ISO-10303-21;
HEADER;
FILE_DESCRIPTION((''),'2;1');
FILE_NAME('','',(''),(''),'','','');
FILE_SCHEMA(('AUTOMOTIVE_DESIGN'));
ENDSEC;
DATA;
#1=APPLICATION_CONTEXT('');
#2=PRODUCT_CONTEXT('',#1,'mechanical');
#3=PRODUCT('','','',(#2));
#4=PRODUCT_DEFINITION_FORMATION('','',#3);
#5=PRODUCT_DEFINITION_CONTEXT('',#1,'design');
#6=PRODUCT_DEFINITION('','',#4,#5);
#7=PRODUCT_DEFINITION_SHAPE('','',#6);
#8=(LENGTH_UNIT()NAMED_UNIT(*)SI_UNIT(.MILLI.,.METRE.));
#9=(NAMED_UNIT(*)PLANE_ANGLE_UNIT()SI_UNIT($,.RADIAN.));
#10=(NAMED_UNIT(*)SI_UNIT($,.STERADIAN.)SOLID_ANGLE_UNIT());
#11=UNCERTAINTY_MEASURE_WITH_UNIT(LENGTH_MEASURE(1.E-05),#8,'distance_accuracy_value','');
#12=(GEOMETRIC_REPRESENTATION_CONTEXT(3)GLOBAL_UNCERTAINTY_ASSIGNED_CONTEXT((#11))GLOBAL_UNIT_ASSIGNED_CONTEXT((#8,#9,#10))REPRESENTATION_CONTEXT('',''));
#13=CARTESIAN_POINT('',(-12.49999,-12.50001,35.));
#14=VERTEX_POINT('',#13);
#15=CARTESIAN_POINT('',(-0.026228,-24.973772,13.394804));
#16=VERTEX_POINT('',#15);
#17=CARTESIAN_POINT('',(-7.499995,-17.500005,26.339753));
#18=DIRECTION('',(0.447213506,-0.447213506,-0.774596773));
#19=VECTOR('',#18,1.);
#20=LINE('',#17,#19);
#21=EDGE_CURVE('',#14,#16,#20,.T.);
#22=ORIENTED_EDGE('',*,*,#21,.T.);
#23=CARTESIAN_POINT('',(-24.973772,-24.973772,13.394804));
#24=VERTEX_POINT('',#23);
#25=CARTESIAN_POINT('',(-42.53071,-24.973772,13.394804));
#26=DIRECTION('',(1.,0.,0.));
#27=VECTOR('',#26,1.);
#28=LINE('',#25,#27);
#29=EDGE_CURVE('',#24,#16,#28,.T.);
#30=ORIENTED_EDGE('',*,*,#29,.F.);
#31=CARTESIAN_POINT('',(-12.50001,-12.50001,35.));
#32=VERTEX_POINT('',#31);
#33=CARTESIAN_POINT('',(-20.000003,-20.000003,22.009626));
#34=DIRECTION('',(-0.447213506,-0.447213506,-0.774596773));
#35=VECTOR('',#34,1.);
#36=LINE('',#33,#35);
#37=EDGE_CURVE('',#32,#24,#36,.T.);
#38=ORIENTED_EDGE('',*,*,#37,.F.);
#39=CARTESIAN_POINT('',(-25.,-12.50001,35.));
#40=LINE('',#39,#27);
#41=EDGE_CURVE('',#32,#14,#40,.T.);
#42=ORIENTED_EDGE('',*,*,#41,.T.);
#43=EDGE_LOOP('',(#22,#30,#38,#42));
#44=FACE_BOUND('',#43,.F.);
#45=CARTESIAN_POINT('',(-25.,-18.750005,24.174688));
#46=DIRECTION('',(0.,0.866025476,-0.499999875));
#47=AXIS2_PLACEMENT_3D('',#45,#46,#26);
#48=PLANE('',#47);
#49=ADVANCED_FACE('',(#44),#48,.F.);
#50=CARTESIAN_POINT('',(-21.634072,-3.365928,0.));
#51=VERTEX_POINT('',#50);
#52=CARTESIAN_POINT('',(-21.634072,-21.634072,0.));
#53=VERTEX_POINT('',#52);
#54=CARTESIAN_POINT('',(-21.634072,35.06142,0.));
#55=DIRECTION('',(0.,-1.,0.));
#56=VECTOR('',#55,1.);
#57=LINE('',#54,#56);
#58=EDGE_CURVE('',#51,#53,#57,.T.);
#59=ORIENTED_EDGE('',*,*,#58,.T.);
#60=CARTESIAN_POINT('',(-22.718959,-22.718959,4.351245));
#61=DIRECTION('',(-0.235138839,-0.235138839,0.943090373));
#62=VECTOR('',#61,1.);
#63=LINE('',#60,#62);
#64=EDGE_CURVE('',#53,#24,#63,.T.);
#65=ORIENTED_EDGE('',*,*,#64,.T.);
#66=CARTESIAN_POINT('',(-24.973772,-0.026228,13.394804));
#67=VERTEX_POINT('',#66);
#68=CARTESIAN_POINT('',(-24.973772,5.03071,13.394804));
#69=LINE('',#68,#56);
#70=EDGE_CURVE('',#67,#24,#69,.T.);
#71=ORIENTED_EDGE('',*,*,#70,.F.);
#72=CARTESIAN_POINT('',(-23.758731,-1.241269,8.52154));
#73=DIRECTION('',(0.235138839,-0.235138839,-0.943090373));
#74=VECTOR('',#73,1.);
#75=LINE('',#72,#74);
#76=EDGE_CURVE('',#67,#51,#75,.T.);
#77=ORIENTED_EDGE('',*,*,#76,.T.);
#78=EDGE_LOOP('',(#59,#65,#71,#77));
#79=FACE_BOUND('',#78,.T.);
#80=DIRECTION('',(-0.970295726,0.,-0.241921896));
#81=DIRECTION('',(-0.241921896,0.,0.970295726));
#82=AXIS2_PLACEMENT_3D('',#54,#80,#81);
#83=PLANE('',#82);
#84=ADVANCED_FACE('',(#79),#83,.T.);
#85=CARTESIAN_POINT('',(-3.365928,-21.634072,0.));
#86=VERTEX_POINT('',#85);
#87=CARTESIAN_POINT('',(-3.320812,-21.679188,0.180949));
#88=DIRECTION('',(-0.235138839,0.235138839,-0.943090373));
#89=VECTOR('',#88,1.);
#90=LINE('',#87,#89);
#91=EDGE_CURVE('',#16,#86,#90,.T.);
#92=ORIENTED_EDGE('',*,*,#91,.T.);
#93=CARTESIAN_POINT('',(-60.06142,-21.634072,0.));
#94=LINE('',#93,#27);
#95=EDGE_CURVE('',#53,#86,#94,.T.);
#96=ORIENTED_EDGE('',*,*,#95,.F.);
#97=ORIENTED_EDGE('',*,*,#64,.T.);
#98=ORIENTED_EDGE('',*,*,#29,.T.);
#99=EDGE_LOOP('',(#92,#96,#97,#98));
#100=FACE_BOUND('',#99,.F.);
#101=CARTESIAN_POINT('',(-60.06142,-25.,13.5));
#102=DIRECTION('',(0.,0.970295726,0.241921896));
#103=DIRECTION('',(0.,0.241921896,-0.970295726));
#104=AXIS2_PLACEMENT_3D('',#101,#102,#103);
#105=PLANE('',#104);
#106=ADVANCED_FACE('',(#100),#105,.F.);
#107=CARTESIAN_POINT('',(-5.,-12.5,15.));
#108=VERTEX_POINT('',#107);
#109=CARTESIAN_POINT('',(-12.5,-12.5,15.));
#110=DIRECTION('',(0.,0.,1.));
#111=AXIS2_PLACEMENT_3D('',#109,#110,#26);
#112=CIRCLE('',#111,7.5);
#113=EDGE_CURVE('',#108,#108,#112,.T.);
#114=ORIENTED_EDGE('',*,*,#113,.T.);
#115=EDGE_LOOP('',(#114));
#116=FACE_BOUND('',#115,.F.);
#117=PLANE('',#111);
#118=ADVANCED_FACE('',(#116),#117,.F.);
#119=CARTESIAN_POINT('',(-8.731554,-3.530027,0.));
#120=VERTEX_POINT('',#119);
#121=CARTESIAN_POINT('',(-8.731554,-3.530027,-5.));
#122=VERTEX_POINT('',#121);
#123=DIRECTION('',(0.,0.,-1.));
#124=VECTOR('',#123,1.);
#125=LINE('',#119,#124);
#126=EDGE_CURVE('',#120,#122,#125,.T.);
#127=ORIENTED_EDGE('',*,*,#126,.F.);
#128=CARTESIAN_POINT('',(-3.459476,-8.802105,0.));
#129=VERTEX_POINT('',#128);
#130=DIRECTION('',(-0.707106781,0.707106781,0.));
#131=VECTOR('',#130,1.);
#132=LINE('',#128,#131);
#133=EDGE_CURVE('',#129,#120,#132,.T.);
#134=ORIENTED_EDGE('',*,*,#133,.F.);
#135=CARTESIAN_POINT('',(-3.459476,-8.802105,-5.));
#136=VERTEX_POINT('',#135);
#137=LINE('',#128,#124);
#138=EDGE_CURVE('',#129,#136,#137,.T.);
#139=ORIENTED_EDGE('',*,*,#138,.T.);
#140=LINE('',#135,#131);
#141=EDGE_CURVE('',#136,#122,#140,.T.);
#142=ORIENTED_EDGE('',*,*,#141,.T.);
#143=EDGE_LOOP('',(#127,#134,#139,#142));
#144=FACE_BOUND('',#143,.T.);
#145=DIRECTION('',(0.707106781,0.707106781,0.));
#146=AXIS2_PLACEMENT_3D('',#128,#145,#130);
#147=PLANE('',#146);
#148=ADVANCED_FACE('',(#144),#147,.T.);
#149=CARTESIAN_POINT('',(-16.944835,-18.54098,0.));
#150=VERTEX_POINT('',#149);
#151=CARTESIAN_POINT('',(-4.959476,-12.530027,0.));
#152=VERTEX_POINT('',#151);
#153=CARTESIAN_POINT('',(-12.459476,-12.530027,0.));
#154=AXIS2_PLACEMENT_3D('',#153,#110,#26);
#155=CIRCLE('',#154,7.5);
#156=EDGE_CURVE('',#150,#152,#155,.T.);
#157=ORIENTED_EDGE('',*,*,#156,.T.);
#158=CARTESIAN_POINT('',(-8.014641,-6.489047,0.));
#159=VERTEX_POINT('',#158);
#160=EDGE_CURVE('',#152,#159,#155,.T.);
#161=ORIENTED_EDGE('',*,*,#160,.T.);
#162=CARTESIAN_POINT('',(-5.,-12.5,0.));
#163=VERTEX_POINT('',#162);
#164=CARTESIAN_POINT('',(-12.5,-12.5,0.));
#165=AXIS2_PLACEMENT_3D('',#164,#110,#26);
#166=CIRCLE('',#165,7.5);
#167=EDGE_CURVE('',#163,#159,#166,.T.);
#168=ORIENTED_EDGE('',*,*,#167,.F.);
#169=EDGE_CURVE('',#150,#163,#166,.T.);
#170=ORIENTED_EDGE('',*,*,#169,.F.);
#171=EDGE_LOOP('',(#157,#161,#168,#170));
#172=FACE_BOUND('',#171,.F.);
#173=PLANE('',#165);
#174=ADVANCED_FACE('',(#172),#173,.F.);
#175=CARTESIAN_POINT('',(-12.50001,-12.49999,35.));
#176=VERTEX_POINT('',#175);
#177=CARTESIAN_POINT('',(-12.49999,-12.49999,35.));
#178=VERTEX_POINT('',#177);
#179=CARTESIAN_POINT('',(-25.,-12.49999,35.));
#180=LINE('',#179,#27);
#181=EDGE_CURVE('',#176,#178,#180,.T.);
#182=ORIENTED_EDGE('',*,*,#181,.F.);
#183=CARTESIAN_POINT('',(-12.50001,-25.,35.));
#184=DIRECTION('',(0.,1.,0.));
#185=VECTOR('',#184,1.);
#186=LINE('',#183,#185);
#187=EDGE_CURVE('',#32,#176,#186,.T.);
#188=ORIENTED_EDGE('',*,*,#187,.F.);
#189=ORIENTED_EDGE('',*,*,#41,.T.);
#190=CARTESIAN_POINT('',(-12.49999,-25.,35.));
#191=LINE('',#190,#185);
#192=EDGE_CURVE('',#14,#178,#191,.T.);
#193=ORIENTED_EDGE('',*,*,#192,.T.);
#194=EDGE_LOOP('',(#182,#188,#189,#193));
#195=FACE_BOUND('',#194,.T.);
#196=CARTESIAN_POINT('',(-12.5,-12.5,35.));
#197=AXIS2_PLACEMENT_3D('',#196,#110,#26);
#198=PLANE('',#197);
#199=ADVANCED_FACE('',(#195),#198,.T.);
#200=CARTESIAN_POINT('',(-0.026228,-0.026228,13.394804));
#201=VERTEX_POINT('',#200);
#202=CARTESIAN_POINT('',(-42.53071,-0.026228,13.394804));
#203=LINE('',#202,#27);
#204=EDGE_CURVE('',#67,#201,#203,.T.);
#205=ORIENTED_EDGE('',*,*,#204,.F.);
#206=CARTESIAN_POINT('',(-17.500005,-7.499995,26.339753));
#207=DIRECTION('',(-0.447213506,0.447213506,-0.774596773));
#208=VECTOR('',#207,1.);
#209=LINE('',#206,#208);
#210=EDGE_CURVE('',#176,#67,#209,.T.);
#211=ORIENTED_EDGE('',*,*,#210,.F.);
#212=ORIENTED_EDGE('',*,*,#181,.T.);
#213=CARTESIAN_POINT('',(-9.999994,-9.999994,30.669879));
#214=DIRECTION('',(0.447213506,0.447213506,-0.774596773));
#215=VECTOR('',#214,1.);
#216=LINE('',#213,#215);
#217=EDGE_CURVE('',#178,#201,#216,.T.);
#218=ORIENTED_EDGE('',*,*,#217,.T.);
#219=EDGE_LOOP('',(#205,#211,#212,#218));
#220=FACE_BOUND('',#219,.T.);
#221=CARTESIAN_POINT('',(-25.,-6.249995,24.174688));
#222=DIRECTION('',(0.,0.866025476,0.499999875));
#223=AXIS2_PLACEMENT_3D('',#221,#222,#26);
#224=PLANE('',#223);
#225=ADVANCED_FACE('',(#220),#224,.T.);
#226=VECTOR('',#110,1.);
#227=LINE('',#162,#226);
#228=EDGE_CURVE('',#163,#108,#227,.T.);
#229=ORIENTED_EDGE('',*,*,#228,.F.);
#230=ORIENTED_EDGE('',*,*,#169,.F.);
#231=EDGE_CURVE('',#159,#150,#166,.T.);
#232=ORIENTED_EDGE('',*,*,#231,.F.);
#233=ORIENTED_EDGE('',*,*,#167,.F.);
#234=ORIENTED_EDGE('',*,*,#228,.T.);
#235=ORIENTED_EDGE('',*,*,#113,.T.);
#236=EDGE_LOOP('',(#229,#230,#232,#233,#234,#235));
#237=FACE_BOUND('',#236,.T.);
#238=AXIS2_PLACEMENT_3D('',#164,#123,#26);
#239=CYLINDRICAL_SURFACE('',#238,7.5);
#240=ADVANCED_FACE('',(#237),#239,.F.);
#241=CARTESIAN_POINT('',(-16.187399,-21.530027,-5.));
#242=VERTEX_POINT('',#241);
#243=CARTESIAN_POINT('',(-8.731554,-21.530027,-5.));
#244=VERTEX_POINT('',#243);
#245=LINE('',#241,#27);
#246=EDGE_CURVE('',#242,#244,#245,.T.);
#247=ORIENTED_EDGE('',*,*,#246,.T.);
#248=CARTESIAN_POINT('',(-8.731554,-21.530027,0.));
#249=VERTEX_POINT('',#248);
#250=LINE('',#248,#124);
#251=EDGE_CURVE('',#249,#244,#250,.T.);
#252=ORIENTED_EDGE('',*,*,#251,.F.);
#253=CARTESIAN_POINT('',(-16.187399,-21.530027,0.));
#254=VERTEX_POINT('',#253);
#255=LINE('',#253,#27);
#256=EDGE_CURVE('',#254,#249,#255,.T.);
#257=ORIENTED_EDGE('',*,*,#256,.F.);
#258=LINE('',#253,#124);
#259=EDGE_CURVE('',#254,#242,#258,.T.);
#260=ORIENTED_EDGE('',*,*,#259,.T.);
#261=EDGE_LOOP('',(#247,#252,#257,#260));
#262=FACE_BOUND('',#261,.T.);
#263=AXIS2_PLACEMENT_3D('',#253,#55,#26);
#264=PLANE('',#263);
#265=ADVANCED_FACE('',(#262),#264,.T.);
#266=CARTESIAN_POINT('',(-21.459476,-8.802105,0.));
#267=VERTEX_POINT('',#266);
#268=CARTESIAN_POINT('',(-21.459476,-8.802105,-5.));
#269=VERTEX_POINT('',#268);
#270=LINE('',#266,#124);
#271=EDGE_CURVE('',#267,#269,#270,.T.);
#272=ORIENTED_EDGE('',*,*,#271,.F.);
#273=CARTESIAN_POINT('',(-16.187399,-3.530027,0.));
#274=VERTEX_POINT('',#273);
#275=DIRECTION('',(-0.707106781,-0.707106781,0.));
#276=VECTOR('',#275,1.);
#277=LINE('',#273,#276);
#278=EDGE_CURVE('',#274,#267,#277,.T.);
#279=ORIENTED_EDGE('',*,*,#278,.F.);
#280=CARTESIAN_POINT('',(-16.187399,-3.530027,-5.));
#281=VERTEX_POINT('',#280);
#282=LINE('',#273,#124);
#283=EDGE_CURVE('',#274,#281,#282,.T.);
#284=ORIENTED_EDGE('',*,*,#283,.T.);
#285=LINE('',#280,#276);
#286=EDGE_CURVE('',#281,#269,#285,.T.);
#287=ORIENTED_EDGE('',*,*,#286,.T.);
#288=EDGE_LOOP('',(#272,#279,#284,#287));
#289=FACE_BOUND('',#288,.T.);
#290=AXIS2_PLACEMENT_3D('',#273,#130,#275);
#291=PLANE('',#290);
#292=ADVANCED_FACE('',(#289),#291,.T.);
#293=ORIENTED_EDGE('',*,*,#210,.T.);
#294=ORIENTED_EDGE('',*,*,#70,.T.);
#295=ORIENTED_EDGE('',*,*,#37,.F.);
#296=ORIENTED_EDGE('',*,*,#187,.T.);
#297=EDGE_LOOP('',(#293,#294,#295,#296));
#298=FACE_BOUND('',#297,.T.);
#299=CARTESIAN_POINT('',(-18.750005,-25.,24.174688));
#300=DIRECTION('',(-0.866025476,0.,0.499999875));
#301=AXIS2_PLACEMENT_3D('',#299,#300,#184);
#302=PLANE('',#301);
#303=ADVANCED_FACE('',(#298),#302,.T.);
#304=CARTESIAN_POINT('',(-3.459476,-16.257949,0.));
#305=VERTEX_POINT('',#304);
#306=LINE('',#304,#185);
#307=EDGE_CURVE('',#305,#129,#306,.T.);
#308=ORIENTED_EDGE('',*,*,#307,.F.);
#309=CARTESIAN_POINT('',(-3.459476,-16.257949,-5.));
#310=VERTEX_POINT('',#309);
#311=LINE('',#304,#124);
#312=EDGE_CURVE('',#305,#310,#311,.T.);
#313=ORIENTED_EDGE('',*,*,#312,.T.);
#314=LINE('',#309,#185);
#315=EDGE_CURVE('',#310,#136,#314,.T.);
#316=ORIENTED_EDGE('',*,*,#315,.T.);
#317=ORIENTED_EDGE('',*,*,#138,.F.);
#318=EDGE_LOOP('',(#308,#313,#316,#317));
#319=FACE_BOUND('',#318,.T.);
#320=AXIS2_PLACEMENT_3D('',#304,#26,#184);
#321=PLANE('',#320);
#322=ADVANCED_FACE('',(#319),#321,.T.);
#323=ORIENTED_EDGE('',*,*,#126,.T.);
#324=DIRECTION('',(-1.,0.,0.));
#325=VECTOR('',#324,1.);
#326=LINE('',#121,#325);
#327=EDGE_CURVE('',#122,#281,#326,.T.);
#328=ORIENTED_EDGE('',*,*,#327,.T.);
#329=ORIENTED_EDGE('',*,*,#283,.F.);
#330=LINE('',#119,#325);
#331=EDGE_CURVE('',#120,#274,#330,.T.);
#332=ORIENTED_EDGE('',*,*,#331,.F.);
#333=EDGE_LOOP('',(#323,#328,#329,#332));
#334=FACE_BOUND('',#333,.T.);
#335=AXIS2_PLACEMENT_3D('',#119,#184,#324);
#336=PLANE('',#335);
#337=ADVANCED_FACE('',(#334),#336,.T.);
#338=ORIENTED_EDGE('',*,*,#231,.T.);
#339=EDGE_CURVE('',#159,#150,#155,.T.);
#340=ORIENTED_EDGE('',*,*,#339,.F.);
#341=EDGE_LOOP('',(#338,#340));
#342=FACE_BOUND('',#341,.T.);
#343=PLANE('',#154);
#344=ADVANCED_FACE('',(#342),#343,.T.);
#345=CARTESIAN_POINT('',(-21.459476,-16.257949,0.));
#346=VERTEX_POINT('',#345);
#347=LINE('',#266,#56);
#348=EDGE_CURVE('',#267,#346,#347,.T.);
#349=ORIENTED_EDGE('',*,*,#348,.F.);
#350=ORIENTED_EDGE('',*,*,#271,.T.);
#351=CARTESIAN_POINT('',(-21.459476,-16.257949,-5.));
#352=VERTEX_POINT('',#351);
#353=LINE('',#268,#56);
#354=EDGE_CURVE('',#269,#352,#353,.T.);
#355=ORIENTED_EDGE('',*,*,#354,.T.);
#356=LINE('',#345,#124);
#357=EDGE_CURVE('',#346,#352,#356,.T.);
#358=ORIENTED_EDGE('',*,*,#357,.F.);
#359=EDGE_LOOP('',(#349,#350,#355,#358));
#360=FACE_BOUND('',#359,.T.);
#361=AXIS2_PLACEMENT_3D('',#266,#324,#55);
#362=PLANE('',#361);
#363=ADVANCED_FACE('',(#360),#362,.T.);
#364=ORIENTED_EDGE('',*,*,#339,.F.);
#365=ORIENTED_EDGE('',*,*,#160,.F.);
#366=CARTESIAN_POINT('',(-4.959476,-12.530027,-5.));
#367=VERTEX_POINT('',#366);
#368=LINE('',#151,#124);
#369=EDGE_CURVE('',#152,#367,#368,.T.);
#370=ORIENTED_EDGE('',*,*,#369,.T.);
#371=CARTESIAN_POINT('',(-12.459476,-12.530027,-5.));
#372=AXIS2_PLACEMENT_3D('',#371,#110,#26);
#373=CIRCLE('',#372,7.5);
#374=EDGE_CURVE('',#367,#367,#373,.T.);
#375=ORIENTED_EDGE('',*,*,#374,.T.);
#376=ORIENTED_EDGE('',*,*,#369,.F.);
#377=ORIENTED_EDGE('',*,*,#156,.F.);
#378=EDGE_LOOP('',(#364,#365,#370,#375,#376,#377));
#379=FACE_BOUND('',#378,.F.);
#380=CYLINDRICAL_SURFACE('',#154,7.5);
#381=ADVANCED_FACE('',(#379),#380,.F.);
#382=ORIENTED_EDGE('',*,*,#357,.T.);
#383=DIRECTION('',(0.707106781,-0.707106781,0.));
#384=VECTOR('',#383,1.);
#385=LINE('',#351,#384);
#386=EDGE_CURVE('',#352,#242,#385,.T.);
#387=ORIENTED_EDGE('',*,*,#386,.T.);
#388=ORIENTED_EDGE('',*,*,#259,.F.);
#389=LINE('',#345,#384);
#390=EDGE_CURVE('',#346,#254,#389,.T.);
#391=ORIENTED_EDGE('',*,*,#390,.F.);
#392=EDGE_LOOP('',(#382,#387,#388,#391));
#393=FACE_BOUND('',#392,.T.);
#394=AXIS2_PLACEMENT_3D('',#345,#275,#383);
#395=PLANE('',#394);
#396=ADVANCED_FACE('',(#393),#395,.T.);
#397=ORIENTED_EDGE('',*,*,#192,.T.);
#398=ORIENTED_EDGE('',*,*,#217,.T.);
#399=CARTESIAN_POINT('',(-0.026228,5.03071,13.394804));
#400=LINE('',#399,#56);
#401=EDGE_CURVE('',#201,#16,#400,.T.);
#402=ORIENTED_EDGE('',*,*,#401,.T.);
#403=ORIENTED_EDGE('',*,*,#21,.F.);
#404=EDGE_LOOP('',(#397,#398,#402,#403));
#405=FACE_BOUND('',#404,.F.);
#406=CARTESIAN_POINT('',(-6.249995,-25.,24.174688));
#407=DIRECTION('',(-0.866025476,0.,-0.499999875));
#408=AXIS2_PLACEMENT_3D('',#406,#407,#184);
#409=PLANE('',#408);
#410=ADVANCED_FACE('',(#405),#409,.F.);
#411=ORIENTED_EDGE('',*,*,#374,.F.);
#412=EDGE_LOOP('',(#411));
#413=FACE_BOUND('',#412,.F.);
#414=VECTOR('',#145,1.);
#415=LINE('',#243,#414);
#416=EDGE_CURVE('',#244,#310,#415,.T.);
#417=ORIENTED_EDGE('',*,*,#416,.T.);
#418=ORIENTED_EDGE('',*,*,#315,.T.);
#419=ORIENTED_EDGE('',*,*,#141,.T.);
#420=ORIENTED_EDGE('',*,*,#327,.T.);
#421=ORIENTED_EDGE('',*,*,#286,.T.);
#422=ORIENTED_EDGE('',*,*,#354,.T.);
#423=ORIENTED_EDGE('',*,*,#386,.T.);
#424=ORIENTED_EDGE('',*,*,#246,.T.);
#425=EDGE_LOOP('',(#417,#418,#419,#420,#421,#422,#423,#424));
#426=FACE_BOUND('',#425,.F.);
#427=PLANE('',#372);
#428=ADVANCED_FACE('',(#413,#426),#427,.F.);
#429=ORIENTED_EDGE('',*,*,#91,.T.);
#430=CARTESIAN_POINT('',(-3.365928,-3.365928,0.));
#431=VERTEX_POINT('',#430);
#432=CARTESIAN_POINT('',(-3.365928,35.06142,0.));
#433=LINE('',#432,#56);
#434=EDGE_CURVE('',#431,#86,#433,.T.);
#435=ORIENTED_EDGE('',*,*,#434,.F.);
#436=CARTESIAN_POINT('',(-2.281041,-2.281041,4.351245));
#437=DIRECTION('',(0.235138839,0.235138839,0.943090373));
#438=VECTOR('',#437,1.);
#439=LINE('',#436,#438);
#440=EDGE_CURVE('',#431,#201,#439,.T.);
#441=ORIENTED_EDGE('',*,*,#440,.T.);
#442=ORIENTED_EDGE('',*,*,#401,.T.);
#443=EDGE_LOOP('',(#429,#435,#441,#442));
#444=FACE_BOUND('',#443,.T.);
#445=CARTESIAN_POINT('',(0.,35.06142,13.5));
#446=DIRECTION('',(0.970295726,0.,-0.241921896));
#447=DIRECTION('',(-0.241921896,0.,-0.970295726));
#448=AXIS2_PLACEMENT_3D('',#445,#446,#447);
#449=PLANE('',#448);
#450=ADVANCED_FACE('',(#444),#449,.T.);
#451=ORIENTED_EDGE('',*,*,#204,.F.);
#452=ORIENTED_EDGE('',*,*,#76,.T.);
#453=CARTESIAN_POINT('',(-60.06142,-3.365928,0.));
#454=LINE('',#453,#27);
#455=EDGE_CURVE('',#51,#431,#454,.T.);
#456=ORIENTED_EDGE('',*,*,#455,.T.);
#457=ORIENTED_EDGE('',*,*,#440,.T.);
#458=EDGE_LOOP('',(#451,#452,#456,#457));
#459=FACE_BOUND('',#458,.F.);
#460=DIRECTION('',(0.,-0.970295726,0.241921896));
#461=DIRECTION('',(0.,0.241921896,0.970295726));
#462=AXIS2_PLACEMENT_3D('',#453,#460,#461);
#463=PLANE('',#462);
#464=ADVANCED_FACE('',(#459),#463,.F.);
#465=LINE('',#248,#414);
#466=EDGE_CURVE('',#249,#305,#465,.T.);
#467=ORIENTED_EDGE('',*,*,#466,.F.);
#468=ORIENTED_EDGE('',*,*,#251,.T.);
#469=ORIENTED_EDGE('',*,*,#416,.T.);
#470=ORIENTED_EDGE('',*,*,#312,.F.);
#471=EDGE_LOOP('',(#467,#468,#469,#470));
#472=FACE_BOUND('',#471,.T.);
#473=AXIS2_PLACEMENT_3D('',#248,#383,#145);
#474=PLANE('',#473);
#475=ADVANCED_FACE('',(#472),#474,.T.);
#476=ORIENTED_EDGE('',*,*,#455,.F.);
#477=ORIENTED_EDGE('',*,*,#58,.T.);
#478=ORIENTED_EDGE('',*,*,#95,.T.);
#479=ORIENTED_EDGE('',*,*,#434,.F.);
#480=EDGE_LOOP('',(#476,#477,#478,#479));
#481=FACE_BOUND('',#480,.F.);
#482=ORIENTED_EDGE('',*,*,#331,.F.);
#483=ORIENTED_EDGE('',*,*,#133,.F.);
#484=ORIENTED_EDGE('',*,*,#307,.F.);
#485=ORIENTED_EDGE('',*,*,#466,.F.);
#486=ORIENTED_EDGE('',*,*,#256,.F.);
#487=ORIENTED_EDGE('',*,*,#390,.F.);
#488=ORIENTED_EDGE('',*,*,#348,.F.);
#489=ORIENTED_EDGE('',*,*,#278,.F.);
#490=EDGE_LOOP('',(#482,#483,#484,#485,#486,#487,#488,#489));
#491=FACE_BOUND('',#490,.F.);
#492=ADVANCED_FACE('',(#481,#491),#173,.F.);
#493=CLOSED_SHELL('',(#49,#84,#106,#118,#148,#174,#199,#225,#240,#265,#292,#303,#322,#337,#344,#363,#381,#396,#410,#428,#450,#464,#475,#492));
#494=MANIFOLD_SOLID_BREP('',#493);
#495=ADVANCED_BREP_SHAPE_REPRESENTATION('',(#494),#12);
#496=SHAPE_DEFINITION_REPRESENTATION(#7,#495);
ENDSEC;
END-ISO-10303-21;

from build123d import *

# Parameters (mm, degrees)
F0_W        = 25
F0_H        = 25
F0_R        = 7.5
F1_DEPTH    = 35
F2_DEPTH    = 15
F3_SIZE2    = 21.650625
F3_SIZE     = 12.49999
F4_R        = 7.5
F5_DEPTH    = 5
F6_T1_DEPTH = 95.1228407313
F6_T3_DEPTH = 95.1228407313


# Not quite as in the source:
# - a fillet or chamfer that OpenCascade refuses, or shapes differently, is made with other operations: its cross-section is extruded or revolved along the edge and cut away or added
# - a fillet or chamfer is up to 0.001 mm smaller than in the source, because OpenCascade refuses the exact size


with BuildPart() as f1:
    # F0 (on Top) → F1 (new body)
    with BuildSketch(Plane.XY):
        with Locations((-12.5, -12.5)):
            Rectangle(F0_W, F0_H)
        with Locations((-12.5, -12.5)):
            Circle(F0_R, mode=Mode.SUBTRACT)
        with Locations((-12.5, -12.5)):
            Circle(F0_R)
    extrude(amount=F1_DEPTH)

    # F0 (on Top) → F2 (cut)
    with BuildSketch(Plane.XY):
        with Locations((-12.5, -12.5)):
            Circle(F0_R)
    extrude(amount=F2_DEPTH, mode=Mode.SUBTRACT)

    # F3 (size 12.5 and 21.6506350946 in the source; OpenCascade refuses exactly that, so slightly less here)
    f3_edges = [f1.edges().sort_by_distance(p)[0] for p in [
        (-25, -12.5, 35),
        (-12.5, -25, 35),
        (0, -12.5, 35),
        (-12.5, 0, 35),
    ]]
    f3_side = f1.faces().sort_by_distance((-12.5, -12.5, 35))[0]
    chamfer(f3_edges, length=F3_SIZE, length2=F3_SIZE2, reference=f3_side)

    # F4 (on Top) → F5 (join)
    with BuildSketch(Plane.XY):
        Polygon((-3.4594764784, -16.2579490188), (-3.4594764784, -8.802104896), (-8.731554417, -3.5300269574), (-16.1873985398, -3.5300269574), (-21.4594764784, -8.802104896), (-21.4594764784, -16.2579490188), (-16.1873985398, -21.5300269574), (-8.731554417, -21.5300269574), align=None)
        with Locations((-12.4594764784, -12.5300269574)):
            Circle(F4_R, mode=Mode.SUBTRACT)
    extrude(amount=-F5_DEPTH)

    # F6: chamfer of 13.5 x 3.3659280384 on 4 edges, made by hand

    # F6_s2 → F6_t1 (cut)
    with BuildSketch(Plane.YZ.offset(-60.0614203657)):
        Polygon((-25, 13.5), (-21.6340719616, 0), (-25, 0), align=None)
        Polygon((-3.3659280384, 0), (0, 13.5), (0, 0), align=None)
    extrude(amount=F6_T1_DEPTH, mode=Mode.SUBTRACT)

    # F6_s4 → F6_t3 (cut)
    with BuildSketch(Plane.XZ.offset(-35.0614203657)):
        Polygon((0, 13.5), (-3.3659280384, 0), (0, 0), align=None)
        Polygon((-21.6340719616, 0), (-25, 13.5), (-25, 0), align=None)
    extrude(amount=F6_T3_DEPTH, mode=Mode.SUBTRACT)


solid = f1.part
